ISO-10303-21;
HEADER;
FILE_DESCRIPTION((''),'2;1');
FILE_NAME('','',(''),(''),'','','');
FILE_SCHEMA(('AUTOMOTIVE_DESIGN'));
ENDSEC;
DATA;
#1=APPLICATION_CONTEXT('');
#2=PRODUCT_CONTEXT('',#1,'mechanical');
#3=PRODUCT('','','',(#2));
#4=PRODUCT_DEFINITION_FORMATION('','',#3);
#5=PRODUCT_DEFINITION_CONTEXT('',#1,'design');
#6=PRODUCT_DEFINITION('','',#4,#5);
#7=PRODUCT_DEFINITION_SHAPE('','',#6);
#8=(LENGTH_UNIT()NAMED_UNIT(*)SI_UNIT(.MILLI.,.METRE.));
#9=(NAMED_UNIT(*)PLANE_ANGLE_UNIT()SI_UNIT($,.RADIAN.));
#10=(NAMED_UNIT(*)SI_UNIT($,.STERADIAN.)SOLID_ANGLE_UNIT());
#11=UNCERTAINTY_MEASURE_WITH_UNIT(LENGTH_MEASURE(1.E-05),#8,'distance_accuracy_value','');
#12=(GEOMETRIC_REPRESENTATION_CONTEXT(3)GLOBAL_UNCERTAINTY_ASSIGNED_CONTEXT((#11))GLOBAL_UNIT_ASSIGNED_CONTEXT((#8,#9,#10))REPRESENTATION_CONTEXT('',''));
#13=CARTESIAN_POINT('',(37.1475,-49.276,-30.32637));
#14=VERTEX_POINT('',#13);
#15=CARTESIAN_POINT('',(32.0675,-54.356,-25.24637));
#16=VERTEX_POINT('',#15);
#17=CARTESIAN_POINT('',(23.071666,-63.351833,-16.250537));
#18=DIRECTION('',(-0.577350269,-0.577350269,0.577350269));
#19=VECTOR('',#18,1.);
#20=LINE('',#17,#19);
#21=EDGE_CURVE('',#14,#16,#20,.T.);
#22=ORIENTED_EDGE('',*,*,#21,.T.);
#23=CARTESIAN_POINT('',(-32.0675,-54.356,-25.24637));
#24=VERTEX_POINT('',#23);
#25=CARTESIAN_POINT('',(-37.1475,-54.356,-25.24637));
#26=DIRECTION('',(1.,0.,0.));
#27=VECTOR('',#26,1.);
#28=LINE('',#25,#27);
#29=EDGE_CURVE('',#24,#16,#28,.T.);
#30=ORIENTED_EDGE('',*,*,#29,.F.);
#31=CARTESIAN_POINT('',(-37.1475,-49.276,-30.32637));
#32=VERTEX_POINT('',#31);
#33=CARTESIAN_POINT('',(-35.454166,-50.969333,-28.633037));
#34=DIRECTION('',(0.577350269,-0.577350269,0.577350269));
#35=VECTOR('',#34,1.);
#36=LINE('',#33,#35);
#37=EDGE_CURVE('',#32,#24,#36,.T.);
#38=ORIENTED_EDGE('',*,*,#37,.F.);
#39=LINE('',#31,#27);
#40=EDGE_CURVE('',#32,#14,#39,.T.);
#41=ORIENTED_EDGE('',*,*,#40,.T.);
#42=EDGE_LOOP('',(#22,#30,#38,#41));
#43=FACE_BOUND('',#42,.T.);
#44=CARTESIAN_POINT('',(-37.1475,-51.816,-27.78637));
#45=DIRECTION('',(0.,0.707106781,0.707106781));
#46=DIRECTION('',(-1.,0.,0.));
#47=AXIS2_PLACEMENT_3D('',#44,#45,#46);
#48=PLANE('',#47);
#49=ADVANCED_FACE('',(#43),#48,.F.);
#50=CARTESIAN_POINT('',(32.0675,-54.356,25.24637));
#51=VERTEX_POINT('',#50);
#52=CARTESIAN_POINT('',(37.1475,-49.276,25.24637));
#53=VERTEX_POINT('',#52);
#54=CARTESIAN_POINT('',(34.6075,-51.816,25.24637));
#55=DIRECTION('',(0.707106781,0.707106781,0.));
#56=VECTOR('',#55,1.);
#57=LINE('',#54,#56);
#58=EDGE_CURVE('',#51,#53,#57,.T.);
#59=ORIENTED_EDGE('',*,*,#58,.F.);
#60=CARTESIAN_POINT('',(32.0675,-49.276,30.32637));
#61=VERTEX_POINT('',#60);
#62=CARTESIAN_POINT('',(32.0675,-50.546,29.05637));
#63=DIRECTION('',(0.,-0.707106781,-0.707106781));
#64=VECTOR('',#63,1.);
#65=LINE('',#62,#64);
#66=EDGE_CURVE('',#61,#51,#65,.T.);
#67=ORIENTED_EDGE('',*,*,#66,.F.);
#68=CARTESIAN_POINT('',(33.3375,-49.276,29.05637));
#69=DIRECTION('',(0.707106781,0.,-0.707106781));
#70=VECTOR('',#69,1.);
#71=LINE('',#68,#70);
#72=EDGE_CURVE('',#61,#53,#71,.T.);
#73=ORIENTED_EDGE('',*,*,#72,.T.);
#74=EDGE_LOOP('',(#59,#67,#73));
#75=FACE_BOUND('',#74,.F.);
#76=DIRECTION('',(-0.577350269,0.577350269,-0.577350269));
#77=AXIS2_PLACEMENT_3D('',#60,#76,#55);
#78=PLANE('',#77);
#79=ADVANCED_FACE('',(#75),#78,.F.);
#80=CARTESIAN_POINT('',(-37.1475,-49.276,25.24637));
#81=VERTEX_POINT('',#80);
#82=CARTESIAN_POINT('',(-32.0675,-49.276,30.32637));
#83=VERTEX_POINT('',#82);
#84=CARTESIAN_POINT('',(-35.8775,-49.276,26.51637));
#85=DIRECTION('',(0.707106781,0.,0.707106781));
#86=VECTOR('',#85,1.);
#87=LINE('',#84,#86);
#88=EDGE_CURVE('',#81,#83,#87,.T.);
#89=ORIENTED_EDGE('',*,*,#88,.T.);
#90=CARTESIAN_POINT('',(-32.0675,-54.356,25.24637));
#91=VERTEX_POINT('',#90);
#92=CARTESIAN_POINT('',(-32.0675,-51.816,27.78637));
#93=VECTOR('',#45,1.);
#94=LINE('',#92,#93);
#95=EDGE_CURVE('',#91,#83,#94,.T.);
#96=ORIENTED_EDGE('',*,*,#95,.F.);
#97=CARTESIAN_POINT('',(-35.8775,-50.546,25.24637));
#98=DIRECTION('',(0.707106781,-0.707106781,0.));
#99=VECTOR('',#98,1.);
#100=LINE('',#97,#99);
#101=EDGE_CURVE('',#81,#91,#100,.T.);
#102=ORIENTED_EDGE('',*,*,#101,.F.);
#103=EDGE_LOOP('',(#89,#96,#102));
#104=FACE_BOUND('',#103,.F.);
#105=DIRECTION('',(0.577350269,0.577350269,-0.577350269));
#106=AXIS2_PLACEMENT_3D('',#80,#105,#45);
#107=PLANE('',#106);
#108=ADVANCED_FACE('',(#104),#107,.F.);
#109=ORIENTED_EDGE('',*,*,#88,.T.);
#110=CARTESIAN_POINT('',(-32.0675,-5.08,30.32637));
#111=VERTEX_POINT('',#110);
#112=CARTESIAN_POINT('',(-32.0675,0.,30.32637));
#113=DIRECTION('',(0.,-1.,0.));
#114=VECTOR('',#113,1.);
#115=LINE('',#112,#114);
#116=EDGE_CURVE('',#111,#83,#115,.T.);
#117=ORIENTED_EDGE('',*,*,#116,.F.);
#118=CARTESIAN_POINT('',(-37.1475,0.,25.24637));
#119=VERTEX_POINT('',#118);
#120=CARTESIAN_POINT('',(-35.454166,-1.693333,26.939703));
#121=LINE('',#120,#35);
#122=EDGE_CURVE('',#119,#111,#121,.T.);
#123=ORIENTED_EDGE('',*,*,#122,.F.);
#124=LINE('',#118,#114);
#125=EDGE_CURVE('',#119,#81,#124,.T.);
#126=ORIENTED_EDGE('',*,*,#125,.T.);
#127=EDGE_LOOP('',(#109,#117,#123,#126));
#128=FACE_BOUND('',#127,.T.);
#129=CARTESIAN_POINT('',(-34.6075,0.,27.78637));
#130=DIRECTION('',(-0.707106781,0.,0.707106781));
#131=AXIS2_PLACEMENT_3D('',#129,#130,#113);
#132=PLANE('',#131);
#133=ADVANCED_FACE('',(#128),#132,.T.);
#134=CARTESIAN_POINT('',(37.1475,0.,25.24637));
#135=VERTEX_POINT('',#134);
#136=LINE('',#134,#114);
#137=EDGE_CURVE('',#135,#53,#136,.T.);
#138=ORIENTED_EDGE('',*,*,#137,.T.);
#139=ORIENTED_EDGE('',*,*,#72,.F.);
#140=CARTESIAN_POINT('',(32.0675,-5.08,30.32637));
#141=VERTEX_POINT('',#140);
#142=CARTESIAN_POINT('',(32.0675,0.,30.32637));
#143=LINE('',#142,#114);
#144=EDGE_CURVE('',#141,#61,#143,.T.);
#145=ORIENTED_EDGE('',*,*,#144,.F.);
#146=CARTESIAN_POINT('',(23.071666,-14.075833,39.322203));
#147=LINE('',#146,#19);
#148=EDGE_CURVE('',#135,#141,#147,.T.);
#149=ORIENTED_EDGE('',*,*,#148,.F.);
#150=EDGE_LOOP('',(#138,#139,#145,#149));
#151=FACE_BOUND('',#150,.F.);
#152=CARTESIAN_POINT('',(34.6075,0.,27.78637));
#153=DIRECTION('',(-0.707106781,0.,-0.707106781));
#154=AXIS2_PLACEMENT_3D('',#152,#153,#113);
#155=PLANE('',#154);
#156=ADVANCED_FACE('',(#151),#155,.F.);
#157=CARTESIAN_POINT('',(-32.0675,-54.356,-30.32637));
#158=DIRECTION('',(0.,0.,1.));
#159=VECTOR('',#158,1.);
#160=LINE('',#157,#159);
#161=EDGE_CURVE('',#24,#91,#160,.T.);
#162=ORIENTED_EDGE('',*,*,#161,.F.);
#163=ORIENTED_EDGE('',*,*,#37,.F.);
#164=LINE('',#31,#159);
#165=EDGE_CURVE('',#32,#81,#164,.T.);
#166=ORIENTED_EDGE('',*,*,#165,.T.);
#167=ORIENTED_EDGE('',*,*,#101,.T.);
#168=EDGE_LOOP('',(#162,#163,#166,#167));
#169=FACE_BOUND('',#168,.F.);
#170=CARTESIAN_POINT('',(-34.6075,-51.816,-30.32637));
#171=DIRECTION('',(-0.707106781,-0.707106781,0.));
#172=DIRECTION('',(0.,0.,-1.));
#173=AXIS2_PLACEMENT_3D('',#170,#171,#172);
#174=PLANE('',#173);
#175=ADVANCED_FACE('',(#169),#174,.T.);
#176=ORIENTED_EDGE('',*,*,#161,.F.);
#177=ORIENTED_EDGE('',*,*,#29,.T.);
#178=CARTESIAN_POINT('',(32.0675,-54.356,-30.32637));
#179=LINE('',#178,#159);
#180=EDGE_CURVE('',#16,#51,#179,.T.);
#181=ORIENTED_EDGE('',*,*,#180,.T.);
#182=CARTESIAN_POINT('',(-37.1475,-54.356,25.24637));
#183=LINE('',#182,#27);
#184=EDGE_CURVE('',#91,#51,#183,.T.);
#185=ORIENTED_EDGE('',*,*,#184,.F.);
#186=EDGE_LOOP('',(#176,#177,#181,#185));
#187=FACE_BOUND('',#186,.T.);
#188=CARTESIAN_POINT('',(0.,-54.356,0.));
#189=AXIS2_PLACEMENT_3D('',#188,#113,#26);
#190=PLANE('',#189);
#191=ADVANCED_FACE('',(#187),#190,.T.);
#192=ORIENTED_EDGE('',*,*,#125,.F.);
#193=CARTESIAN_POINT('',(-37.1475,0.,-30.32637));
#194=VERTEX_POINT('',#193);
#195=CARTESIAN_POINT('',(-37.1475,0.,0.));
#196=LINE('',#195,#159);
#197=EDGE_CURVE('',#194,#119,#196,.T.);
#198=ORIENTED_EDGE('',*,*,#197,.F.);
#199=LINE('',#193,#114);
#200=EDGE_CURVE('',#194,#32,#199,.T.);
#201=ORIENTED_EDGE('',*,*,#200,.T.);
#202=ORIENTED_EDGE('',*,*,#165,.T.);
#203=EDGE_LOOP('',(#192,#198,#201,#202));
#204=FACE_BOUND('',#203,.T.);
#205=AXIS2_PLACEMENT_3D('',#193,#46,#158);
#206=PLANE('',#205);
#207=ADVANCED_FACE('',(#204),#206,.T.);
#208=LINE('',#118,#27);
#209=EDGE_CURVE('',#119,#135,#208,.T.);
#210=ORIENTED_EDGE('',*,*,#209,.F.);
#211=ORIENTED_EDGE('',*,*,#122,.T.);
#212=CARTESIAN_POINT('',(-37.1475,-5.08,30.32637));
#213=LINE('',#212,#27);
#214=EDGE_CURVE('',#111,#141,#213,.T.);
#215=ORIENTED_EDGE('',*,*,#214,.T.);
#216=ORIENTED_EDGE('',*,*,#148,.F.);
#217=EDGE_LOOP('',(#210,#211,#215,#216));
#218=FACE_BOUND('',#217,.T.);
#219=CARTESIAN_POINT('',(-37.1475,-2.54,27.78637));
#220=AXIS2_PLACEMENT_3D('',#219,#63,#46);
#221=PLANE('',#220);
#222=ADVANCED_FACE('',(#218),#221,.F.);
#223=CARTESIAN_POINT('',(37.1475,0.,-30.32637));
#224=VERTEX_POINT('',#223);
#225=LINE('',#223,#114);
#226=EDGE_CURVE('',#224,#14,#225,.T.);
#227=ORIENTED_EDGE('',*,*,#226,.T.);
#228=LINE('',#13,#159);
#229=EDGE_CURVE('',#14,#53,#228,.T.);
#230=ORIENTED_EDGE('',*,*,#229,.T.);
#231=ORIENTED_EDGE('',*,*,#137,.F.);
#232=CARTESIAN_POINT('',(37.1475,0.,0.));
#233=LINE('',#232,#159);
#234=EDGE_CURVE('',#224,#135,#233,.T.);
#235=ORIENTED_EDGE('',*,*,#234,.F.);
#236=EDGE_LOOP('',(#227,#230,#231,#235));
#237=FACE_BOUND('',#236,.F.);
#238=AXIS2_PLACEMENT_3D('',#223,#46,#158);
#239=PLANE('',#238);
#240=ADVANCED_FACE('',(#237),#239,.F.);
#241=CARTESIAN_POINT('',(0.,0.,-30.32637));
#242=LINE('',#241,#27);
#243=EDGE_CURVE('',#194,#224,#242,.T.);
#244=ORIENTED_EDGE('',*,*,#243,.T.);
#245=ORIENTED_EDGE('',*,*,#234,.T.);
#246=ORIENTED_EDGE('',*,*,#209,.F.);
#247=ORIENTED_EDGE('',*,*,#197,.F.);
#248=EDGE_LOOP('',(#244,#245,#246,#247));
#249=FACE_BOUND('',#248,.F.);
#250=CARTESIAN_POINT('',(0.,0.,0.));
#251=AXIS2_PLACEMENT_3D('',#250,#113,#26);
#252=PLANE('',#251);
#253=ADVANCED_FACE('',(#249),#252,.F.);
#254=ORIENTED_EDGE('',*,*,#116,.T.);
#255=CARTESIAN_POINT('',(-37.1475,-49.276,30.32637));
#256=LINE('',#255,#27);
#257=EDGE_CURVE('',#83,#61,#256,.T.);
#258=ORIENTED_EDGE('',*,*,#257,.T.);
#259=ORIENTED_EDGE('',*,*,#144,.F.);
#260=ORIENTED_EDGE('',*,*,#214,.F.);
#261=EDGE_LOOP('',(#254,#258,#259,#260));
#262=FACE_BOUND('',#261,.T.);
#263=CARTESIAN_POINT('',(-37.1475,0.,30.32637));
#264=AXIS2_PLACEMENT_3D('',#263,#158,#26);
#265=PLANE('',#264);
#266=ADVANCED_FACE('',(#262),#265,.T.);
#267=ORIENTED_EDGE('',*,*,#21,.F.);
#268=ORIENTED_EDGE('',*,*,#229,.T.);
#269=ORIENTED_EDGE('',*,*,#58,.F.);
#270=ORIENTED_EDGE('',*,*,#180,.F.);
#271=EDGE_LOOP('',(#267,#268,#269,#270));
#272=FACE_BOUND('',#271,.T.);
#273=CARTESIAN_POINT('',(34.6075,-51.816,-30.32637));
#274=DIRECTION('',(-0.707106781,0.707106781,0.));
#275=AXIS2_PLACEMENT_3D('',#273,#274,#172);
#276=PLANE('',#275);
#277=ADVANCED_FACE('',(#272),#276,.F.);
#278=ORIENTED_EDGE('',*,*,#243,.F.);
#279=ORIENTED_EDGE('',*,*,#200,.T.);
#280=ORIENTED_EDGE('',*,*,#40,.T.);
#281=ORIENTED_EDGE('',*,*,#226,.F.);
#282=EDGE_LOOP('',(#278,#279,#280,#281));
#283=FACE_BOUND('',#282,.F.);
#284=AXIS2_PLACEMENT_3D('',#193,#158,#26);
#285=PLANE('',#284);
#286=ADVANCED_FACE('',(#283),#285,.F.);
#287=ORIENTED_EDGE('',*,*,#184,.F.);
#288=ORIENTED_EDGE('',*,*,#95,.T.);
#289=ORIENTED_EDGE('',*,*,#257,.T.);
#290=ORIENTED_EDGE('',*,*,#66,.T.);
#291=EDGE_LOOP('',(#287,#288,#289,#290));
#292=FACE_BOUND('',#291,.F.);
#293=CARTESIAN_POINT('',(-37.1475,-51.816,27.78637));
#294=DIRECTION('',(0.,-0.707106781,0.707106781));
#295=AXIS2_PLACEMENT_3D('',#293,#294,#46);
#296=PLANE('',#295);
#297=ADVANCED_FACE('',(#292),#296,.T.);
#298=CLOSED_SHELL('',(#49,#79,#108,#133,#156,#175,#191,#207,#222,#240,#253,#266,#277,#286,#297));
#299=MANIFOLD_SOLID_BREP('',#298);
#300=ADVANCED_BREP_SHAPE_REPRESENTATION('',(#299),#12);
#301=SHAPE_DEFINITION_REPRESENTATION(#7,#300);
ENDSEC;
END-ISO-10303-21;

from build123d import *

# Parameters (mm, degrees)
F0_W     = 74.2949992418
F0_H     = 60.6527402997
F1_DEPTH = 54.356
F2_SIZE2 = 5.08
F2_SIZE  = 5.08


# Not quite as in the source:
# - the program builds the solid bodies; features that only make, move or delete a surface that nothing else refers to are left out


with BuildPart() as f1:
    # F0 (on Front) → F1 (new body)
    with BuildSketch(Plane.XZ):
        Rectangle(F0_W, F0_H)
    extrude(amount=F1_DEPTH)

    # F2
    f2_edges = [f1.edges().sort_by_distance(p)[0] for p in [
        (37.1475, -54.356, 0),
        (0, -54.356, 30.32637),
        (-37.1475, -54.356, 0),
        (0, -54.356, -30.32637),
        (37.1475, -27.178, 30.32637),
        (-37.1475, -27.178, 30.32637),
        (0, 0, 30.32637),
    ]]
    chamfer(f2_edges, length=F2_SIZE, length2=F2_SIZE2)


solid = f1.part
